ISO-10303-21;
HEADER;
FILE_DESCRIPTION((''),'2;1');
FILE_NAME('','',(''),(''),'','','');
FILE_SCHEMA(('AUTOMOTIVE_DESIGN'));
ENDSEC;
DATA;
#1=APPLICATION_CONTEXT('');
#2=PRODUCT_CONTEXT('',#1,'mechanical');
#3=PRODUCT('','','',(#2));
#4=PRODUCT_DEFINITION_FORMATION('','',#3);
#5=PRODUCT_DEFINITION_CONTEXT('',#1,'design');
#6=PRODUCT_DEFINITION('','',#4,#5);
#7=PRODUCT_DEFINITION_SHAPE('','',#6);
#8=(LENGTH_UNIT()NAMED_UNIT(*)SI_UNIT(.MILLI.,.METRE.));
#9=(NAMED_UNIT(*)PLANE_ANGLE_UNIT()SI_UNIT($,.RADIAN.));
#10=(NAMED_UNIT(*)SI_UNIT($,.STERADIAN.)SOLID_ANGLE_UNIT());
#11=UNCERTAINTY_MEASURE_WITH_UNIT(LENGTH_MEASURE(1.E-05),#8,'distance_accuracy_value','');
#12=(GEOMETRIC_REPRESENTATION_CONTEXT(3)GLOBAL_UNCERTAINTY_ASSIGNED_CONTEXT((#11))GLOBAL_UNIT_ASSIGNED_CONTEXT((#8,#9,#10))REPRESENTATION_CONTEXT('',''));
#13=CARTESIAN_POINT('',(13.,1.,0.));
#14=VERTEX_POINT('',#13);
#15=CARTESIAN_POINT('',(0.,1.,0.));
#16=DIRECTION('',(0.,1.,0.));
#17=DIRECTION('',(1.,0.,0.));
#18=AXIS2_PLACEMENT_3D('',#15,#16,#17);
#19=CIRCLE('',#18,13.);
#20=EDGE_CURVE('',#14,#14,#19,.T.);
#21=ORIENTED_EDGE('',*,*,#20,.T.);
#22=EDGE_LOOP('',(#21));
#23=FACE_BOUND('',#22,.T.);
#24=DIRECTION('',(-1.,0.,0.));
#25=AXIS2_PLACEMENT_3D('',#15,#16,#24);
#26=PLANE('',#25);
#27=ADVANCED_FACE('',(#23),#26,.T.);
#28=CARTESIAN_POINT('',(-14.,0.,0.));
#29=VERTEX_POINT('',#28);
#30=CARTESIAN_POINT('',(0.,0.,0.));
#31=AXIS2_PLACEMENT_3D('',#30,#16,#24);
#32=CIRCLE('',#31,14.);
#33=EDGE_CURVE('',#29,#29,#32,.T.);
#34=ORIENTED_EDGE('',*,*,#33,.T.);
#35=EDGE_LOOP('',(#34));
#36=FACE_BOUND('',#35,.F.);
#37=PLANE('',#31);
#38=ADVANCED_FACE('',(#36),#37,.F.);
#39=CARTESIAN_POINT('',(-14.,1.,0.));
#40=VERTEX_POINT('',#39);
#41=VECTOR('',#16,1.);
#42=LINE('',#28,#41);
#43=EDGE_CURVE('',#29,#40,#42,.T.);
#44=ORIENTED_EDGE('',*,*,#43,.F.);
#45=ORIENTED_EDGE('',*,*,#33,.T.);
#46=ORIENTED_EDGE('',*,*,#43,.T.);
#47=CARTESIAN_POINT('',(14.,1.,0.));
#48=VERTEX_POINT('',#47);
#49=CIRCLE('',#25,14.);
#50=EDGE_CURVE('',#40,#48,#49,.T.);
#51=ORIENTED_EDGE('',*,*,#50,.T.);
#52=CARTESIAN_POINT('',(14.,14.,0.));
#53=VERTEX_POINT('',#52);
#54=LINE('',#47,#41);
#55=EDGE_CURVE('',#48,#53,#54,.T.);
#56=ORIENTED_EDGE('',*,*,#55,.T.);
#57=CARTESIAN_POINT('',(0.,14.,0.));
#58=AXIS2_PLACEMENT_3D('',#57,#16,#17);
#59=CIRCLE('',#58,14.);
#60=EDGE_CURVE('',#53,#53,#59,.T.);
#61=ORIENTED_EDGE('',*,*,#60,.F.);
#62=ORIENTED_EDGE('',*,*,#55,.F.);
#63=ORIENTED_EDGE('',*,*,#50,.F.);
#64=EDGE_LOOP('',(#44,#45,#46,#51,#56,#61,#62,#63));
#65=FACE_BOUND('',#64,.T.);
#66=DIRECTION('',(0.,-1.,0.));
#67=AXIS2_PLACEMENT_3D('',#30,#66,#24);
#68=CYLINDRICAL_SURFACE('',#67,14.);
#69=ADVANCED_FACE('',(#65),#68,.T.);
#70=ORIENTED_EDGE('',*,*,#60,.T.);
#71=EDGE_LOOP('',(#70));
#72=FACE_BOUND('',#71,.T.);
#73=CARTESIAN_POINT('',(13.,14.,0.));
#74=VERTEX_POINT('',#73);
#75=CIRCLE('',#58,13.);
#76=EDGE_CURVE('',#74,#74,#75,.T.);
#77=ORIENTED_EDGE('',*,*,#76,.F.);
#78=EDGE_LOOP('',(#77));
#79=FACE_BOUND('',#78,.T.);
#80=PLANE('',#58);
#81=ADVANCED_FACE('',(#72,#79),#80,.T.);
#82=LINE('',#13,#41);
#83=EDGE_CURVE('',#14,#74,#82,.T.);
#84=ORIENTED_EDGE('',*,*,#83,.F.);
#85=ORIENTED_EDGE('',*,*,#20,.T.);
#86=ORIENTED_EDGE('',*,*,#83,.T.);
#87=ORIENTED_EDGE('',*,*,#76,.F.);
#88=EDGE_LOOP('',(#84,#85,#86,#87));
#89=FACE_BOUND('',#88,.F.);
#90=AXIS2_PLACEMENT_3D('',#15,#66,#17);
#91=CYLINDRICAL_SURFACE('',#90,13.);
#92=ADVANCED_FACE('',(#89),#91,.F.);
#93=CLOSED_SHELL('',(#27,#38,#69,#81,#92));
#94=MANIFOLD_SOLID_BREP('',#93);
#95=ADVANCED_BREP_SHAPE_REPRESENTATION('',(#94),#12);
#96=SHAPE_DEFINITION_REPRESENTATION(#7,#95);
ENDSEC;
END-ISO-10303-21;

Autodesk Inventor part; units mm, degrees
ref_plane "YZ Plane" through (0, 0, 0) normal (1, 0, 0) x (0, 1, 0)
ref_plane "XZ Plane" through (0, 0, 0) normal (0, 1, 0) x (-1, 0, 0)
ref_plane "XY Plane" through (0, 0, 0) normal (0, 0, 1) x (1, 0, 0)
sketch "Sketch1" plane through (0, 0, 0) normal (0, 1, 0) x (-1, 0, 0)
  circle A0 centre (0, 0) radius 14
  dimension "d0" = 28
extrude "Extrusion1" add sketch "Sketch1" along normal blind 1
sketch "Sketch2" plane through (0, 1, 0) normal (0, 1, 0) x (1, 0, 0)
  circle A0 centre (0, 0) radius 14 projected
  circle A1 centre (0, 0) radius 13
  dimension "d3" = 1
extrude "Extrusion2" add sketch "Sketch2" along normal blind 13
properties part number "vial cap"
